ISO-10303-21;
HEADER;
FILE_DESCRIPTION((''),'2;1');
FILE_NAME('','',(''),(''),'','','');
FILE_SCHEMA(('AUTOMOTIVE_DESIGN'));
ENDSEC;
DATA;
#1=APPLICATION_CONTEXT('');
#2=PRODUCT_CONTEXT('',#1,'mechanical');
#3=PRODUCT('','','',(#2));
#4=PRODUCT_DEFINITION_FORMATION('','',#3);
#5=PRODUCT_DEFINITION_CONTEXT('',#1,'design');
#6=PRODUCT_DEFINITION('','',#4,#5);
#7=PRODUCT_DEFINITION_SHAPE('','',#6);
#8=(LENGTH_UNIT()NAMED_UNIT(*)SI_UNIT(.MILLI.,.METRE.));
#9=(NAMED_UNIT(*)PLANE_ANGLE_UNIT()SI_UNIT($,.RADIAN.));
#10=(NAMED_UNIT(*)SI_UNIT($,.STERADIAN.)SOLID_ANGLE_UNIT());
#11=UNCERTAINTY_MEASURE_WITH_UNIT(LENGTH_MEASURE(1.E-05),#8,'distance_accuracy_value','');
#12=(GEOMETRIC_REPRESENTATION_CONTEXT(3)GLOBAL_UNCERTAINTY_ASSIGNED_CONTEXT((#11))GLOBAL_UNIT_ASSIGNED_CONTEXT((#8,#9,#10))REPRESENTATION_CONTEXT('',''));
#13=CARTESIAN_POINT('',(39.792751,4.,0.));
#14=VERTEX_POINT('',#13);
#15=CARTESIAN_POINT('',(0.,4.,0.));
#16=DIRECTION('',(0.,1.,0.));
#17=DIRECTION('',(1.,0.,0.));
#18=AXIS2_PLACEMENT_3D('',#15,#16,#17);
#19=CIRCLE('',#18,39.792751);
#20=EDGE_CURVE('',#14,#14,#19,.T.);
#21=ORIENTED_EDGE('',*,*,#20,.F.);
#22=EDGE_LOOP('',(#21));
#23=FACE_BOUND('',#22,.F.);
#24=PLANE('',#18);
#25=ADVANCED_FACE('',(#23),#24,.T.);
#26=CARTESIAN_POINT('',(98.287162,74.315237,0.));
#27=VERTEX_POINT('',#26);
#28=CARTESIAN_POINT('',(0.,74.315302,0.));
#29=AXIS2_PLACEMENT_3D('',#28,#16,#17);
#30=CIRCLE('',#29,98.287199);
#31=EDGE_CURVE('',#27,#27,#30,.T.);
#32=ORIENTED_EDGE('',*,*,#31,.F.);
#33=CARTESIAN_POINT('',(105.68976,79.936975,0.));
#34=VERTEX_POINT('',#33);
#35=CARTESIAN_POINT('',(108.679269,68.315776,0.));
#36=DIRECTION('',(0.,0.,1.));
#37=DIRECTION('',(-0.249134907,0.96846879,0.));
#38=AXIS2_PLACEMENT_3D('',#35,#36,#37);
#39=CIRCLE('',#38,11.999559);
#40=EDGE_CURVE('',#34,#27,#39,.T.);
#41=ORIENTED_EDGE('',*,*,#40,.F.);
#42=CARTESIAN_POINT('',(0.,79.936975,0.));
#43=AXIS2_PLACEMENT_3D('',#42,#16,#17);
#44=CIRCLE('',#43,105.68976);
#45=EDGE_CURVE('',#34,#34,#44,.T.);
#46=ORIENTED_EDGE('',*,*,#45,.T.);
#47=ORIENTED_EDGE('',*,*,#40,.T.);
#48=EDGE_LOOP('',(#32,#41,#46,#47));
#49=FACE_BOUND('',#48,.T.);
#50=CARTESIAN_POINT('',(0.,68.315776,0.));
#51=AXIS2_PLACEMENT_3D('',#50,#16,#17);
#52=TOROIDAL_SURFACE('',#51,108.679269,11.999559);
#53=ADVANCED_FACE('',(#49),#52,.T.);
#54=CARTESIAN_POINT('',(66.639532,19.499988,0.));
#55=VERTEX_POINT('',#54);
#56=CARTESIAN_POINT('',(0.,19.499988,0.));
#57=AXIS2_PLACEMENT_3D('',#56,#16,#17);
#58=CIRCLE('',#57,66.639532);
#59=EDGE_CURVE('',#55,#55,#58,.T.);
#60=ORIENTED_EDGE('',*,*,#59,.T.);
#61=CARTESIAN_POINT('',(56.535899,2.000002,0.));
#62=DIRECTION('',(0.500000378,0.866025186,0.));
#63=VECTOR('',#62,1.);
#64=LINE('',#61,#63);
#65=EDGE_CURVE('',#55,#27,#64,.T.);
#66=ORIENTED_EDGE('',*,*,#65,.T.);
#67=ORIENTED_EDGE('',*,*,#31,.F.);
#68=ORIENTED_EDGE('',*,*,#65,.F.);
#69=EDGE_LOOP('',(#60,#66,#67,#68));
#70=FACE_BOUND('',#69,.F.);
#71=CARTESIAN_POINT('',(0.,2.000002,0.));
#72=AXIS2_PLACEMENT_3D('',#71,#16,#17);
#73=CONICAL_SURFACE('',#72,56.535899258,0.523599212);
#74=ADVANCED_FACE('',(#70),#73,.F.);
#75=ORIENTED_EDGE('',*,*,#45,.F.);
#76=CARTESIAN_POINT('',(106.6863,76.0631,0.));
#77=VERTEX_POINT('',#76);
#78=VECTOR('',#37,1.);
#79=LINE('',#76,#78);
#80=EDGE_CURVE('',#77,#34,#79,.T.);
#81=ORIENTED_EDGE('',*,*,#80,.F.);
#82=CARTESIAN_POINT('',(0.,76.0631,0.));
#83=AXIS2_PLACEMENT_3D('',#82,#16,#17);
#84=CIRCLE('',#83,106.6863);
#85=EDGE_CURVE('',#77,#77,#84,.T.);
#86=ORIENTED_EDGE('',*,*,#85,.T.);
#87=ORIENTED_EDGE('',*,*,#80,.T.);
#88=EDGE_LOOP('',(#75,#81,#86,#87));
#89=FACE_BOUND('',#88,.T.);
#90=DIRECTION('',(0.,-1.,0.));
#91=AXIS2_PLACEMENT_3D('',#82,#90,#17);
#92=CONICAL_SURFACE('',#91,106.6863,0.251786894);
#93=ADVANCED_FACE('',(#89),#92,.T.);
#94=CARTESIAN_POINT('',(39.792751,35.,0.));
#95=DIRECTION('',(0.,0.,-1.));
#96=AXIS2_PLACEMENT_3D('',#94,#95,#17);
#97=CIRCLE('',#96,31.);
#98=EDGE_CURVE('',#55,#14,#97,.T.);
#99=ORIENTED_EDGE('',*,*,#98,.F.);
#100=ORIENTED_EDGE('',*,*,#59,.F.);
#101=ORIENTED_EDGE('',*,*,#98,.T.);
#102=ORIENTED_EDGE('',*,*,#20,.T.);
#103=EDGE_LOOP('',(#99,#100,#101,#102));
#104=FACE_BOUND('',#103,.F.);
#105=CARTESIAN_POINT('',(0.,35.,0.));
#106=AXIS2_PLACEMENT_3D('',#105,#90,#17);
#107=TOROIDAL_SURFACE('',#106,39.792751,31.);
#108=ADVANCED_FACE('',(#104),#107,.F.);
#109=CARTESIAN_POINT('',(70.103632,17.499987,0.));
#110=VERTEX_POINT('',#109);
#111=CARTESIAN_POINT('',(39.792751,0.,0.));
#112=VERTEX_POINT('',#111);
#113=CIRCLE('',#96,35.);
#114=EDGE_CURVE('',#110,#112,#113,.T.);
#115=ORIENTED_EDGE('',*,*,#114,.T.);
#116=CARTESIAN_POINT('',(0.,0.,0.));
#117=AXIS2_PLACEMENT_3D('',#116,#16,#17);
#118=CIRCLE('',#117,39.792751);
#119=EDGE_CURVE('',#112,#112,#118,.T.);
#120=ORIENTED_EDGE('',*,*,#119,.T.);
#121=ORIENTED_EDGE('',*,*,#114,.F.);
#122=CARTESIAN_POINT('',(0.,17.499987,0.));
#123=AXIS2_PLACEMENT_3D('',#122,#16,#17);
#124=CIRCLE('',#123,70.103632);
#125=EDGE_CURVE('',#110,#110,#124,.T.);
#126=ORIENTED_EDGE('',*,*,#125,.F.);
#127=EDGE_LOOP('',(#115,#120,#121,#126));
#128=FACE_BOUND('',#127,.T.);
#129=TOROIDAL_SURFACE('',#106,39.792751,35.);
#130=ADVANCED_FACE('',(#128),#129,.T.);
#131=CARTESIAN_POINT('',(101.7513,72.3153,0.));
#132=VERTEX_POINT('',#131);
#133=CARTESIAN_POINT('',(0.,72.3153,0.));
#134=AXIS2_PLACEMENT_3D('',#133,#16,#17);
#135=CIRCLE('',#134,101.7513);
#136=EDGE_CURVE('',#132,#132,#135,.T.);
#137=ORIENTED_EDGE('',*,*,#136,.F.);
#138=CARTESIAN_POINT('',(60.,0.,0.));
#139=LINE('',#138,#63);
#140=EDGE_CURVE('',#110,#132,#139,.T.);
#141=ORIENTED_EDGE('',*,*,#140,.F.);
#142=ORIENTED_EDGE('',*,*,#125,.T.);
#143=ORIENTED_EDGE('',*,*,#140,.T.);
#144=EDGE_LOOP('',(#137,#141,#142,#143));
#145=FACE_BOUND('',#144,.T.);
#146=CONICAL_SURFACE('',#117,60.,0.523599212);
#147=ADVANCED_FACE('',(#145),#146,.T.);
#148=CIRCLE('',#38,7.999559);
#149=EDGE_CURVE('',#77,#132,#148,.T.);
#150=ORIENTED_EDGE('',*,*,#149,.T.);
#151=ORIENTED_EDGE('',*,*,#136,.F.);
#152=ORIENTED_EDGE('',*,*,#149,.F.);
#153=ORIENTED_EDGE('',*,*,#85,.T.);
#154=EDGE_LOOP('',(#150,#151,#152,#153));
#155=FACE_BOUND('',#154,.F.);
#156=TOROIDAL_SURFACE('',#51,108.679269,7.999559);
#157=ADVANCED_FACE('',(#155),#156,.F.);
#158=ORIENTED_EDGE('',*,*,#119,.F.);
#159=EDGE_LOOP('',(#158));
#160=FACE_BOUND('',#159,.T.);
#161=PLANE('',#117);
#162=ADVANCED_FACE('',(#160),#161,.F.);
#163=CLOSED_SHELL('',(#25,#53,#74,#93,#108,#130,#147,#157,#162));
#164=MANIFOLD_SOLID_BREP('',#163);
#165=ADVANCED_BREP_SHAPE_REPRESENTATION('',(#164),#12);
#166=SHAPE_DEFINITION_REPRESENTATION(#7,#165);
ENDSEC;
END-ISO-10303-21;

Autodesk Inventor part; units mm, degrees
ref_plane "YZ Plane" through (0, 0, 0) normal (1, 0, 0) x (0, 1, 0)
ref_plane "XZ Plane" through (0, 0, 0) normal (0, 1, 0) x (-1, 0, 0)
ref_plane "XY Plane" through (0, 0, 0) normal (0, 0, 1) x (1, 0, 0)
sketch "Skizze1" plane through (0, 0, 0) normal (0, 0, 1) x (1, 0, 0)
  line L0 (0, 0) -> (0, 393.6564) construction
  line L1 (0, 0) -> (60, 0)
  line L2 (60, 0) -> (101.7513, 72.3153)
  line L3 (106.188, 80) -> (0, 80)
  arc A0 (106.6863, 76.0631) -> (101.7513, 72.3153) centre (108.6795, 68.3153) ccw
  arc A1 (106.6863, 76.0631) -> (106.188, 80) centre (106.188, 78) ccw
  line L4 (0, 0) -> (0, 80)
  dimension "d1" = 30
  dimension "d2" = 80
  dimension "d3" = 120
  dimension "d4" = 2
  dimension "d5" = 8
revolve "Umdrehung1" add sketch "Skizze1" angle 360 about axis through (0, 0, 0) along (0, 1, 0)
fillet "Rundung2" radius 35 1 edges at (-60, 0, 0)
shell "Wandung5" thickness 4 removed faces 2 at (6.6674, 80, -32.0854) at (-108.0747, 77.9307, -4.9241)
properties part number "Bol" material "Stahl, galvanisiert"
